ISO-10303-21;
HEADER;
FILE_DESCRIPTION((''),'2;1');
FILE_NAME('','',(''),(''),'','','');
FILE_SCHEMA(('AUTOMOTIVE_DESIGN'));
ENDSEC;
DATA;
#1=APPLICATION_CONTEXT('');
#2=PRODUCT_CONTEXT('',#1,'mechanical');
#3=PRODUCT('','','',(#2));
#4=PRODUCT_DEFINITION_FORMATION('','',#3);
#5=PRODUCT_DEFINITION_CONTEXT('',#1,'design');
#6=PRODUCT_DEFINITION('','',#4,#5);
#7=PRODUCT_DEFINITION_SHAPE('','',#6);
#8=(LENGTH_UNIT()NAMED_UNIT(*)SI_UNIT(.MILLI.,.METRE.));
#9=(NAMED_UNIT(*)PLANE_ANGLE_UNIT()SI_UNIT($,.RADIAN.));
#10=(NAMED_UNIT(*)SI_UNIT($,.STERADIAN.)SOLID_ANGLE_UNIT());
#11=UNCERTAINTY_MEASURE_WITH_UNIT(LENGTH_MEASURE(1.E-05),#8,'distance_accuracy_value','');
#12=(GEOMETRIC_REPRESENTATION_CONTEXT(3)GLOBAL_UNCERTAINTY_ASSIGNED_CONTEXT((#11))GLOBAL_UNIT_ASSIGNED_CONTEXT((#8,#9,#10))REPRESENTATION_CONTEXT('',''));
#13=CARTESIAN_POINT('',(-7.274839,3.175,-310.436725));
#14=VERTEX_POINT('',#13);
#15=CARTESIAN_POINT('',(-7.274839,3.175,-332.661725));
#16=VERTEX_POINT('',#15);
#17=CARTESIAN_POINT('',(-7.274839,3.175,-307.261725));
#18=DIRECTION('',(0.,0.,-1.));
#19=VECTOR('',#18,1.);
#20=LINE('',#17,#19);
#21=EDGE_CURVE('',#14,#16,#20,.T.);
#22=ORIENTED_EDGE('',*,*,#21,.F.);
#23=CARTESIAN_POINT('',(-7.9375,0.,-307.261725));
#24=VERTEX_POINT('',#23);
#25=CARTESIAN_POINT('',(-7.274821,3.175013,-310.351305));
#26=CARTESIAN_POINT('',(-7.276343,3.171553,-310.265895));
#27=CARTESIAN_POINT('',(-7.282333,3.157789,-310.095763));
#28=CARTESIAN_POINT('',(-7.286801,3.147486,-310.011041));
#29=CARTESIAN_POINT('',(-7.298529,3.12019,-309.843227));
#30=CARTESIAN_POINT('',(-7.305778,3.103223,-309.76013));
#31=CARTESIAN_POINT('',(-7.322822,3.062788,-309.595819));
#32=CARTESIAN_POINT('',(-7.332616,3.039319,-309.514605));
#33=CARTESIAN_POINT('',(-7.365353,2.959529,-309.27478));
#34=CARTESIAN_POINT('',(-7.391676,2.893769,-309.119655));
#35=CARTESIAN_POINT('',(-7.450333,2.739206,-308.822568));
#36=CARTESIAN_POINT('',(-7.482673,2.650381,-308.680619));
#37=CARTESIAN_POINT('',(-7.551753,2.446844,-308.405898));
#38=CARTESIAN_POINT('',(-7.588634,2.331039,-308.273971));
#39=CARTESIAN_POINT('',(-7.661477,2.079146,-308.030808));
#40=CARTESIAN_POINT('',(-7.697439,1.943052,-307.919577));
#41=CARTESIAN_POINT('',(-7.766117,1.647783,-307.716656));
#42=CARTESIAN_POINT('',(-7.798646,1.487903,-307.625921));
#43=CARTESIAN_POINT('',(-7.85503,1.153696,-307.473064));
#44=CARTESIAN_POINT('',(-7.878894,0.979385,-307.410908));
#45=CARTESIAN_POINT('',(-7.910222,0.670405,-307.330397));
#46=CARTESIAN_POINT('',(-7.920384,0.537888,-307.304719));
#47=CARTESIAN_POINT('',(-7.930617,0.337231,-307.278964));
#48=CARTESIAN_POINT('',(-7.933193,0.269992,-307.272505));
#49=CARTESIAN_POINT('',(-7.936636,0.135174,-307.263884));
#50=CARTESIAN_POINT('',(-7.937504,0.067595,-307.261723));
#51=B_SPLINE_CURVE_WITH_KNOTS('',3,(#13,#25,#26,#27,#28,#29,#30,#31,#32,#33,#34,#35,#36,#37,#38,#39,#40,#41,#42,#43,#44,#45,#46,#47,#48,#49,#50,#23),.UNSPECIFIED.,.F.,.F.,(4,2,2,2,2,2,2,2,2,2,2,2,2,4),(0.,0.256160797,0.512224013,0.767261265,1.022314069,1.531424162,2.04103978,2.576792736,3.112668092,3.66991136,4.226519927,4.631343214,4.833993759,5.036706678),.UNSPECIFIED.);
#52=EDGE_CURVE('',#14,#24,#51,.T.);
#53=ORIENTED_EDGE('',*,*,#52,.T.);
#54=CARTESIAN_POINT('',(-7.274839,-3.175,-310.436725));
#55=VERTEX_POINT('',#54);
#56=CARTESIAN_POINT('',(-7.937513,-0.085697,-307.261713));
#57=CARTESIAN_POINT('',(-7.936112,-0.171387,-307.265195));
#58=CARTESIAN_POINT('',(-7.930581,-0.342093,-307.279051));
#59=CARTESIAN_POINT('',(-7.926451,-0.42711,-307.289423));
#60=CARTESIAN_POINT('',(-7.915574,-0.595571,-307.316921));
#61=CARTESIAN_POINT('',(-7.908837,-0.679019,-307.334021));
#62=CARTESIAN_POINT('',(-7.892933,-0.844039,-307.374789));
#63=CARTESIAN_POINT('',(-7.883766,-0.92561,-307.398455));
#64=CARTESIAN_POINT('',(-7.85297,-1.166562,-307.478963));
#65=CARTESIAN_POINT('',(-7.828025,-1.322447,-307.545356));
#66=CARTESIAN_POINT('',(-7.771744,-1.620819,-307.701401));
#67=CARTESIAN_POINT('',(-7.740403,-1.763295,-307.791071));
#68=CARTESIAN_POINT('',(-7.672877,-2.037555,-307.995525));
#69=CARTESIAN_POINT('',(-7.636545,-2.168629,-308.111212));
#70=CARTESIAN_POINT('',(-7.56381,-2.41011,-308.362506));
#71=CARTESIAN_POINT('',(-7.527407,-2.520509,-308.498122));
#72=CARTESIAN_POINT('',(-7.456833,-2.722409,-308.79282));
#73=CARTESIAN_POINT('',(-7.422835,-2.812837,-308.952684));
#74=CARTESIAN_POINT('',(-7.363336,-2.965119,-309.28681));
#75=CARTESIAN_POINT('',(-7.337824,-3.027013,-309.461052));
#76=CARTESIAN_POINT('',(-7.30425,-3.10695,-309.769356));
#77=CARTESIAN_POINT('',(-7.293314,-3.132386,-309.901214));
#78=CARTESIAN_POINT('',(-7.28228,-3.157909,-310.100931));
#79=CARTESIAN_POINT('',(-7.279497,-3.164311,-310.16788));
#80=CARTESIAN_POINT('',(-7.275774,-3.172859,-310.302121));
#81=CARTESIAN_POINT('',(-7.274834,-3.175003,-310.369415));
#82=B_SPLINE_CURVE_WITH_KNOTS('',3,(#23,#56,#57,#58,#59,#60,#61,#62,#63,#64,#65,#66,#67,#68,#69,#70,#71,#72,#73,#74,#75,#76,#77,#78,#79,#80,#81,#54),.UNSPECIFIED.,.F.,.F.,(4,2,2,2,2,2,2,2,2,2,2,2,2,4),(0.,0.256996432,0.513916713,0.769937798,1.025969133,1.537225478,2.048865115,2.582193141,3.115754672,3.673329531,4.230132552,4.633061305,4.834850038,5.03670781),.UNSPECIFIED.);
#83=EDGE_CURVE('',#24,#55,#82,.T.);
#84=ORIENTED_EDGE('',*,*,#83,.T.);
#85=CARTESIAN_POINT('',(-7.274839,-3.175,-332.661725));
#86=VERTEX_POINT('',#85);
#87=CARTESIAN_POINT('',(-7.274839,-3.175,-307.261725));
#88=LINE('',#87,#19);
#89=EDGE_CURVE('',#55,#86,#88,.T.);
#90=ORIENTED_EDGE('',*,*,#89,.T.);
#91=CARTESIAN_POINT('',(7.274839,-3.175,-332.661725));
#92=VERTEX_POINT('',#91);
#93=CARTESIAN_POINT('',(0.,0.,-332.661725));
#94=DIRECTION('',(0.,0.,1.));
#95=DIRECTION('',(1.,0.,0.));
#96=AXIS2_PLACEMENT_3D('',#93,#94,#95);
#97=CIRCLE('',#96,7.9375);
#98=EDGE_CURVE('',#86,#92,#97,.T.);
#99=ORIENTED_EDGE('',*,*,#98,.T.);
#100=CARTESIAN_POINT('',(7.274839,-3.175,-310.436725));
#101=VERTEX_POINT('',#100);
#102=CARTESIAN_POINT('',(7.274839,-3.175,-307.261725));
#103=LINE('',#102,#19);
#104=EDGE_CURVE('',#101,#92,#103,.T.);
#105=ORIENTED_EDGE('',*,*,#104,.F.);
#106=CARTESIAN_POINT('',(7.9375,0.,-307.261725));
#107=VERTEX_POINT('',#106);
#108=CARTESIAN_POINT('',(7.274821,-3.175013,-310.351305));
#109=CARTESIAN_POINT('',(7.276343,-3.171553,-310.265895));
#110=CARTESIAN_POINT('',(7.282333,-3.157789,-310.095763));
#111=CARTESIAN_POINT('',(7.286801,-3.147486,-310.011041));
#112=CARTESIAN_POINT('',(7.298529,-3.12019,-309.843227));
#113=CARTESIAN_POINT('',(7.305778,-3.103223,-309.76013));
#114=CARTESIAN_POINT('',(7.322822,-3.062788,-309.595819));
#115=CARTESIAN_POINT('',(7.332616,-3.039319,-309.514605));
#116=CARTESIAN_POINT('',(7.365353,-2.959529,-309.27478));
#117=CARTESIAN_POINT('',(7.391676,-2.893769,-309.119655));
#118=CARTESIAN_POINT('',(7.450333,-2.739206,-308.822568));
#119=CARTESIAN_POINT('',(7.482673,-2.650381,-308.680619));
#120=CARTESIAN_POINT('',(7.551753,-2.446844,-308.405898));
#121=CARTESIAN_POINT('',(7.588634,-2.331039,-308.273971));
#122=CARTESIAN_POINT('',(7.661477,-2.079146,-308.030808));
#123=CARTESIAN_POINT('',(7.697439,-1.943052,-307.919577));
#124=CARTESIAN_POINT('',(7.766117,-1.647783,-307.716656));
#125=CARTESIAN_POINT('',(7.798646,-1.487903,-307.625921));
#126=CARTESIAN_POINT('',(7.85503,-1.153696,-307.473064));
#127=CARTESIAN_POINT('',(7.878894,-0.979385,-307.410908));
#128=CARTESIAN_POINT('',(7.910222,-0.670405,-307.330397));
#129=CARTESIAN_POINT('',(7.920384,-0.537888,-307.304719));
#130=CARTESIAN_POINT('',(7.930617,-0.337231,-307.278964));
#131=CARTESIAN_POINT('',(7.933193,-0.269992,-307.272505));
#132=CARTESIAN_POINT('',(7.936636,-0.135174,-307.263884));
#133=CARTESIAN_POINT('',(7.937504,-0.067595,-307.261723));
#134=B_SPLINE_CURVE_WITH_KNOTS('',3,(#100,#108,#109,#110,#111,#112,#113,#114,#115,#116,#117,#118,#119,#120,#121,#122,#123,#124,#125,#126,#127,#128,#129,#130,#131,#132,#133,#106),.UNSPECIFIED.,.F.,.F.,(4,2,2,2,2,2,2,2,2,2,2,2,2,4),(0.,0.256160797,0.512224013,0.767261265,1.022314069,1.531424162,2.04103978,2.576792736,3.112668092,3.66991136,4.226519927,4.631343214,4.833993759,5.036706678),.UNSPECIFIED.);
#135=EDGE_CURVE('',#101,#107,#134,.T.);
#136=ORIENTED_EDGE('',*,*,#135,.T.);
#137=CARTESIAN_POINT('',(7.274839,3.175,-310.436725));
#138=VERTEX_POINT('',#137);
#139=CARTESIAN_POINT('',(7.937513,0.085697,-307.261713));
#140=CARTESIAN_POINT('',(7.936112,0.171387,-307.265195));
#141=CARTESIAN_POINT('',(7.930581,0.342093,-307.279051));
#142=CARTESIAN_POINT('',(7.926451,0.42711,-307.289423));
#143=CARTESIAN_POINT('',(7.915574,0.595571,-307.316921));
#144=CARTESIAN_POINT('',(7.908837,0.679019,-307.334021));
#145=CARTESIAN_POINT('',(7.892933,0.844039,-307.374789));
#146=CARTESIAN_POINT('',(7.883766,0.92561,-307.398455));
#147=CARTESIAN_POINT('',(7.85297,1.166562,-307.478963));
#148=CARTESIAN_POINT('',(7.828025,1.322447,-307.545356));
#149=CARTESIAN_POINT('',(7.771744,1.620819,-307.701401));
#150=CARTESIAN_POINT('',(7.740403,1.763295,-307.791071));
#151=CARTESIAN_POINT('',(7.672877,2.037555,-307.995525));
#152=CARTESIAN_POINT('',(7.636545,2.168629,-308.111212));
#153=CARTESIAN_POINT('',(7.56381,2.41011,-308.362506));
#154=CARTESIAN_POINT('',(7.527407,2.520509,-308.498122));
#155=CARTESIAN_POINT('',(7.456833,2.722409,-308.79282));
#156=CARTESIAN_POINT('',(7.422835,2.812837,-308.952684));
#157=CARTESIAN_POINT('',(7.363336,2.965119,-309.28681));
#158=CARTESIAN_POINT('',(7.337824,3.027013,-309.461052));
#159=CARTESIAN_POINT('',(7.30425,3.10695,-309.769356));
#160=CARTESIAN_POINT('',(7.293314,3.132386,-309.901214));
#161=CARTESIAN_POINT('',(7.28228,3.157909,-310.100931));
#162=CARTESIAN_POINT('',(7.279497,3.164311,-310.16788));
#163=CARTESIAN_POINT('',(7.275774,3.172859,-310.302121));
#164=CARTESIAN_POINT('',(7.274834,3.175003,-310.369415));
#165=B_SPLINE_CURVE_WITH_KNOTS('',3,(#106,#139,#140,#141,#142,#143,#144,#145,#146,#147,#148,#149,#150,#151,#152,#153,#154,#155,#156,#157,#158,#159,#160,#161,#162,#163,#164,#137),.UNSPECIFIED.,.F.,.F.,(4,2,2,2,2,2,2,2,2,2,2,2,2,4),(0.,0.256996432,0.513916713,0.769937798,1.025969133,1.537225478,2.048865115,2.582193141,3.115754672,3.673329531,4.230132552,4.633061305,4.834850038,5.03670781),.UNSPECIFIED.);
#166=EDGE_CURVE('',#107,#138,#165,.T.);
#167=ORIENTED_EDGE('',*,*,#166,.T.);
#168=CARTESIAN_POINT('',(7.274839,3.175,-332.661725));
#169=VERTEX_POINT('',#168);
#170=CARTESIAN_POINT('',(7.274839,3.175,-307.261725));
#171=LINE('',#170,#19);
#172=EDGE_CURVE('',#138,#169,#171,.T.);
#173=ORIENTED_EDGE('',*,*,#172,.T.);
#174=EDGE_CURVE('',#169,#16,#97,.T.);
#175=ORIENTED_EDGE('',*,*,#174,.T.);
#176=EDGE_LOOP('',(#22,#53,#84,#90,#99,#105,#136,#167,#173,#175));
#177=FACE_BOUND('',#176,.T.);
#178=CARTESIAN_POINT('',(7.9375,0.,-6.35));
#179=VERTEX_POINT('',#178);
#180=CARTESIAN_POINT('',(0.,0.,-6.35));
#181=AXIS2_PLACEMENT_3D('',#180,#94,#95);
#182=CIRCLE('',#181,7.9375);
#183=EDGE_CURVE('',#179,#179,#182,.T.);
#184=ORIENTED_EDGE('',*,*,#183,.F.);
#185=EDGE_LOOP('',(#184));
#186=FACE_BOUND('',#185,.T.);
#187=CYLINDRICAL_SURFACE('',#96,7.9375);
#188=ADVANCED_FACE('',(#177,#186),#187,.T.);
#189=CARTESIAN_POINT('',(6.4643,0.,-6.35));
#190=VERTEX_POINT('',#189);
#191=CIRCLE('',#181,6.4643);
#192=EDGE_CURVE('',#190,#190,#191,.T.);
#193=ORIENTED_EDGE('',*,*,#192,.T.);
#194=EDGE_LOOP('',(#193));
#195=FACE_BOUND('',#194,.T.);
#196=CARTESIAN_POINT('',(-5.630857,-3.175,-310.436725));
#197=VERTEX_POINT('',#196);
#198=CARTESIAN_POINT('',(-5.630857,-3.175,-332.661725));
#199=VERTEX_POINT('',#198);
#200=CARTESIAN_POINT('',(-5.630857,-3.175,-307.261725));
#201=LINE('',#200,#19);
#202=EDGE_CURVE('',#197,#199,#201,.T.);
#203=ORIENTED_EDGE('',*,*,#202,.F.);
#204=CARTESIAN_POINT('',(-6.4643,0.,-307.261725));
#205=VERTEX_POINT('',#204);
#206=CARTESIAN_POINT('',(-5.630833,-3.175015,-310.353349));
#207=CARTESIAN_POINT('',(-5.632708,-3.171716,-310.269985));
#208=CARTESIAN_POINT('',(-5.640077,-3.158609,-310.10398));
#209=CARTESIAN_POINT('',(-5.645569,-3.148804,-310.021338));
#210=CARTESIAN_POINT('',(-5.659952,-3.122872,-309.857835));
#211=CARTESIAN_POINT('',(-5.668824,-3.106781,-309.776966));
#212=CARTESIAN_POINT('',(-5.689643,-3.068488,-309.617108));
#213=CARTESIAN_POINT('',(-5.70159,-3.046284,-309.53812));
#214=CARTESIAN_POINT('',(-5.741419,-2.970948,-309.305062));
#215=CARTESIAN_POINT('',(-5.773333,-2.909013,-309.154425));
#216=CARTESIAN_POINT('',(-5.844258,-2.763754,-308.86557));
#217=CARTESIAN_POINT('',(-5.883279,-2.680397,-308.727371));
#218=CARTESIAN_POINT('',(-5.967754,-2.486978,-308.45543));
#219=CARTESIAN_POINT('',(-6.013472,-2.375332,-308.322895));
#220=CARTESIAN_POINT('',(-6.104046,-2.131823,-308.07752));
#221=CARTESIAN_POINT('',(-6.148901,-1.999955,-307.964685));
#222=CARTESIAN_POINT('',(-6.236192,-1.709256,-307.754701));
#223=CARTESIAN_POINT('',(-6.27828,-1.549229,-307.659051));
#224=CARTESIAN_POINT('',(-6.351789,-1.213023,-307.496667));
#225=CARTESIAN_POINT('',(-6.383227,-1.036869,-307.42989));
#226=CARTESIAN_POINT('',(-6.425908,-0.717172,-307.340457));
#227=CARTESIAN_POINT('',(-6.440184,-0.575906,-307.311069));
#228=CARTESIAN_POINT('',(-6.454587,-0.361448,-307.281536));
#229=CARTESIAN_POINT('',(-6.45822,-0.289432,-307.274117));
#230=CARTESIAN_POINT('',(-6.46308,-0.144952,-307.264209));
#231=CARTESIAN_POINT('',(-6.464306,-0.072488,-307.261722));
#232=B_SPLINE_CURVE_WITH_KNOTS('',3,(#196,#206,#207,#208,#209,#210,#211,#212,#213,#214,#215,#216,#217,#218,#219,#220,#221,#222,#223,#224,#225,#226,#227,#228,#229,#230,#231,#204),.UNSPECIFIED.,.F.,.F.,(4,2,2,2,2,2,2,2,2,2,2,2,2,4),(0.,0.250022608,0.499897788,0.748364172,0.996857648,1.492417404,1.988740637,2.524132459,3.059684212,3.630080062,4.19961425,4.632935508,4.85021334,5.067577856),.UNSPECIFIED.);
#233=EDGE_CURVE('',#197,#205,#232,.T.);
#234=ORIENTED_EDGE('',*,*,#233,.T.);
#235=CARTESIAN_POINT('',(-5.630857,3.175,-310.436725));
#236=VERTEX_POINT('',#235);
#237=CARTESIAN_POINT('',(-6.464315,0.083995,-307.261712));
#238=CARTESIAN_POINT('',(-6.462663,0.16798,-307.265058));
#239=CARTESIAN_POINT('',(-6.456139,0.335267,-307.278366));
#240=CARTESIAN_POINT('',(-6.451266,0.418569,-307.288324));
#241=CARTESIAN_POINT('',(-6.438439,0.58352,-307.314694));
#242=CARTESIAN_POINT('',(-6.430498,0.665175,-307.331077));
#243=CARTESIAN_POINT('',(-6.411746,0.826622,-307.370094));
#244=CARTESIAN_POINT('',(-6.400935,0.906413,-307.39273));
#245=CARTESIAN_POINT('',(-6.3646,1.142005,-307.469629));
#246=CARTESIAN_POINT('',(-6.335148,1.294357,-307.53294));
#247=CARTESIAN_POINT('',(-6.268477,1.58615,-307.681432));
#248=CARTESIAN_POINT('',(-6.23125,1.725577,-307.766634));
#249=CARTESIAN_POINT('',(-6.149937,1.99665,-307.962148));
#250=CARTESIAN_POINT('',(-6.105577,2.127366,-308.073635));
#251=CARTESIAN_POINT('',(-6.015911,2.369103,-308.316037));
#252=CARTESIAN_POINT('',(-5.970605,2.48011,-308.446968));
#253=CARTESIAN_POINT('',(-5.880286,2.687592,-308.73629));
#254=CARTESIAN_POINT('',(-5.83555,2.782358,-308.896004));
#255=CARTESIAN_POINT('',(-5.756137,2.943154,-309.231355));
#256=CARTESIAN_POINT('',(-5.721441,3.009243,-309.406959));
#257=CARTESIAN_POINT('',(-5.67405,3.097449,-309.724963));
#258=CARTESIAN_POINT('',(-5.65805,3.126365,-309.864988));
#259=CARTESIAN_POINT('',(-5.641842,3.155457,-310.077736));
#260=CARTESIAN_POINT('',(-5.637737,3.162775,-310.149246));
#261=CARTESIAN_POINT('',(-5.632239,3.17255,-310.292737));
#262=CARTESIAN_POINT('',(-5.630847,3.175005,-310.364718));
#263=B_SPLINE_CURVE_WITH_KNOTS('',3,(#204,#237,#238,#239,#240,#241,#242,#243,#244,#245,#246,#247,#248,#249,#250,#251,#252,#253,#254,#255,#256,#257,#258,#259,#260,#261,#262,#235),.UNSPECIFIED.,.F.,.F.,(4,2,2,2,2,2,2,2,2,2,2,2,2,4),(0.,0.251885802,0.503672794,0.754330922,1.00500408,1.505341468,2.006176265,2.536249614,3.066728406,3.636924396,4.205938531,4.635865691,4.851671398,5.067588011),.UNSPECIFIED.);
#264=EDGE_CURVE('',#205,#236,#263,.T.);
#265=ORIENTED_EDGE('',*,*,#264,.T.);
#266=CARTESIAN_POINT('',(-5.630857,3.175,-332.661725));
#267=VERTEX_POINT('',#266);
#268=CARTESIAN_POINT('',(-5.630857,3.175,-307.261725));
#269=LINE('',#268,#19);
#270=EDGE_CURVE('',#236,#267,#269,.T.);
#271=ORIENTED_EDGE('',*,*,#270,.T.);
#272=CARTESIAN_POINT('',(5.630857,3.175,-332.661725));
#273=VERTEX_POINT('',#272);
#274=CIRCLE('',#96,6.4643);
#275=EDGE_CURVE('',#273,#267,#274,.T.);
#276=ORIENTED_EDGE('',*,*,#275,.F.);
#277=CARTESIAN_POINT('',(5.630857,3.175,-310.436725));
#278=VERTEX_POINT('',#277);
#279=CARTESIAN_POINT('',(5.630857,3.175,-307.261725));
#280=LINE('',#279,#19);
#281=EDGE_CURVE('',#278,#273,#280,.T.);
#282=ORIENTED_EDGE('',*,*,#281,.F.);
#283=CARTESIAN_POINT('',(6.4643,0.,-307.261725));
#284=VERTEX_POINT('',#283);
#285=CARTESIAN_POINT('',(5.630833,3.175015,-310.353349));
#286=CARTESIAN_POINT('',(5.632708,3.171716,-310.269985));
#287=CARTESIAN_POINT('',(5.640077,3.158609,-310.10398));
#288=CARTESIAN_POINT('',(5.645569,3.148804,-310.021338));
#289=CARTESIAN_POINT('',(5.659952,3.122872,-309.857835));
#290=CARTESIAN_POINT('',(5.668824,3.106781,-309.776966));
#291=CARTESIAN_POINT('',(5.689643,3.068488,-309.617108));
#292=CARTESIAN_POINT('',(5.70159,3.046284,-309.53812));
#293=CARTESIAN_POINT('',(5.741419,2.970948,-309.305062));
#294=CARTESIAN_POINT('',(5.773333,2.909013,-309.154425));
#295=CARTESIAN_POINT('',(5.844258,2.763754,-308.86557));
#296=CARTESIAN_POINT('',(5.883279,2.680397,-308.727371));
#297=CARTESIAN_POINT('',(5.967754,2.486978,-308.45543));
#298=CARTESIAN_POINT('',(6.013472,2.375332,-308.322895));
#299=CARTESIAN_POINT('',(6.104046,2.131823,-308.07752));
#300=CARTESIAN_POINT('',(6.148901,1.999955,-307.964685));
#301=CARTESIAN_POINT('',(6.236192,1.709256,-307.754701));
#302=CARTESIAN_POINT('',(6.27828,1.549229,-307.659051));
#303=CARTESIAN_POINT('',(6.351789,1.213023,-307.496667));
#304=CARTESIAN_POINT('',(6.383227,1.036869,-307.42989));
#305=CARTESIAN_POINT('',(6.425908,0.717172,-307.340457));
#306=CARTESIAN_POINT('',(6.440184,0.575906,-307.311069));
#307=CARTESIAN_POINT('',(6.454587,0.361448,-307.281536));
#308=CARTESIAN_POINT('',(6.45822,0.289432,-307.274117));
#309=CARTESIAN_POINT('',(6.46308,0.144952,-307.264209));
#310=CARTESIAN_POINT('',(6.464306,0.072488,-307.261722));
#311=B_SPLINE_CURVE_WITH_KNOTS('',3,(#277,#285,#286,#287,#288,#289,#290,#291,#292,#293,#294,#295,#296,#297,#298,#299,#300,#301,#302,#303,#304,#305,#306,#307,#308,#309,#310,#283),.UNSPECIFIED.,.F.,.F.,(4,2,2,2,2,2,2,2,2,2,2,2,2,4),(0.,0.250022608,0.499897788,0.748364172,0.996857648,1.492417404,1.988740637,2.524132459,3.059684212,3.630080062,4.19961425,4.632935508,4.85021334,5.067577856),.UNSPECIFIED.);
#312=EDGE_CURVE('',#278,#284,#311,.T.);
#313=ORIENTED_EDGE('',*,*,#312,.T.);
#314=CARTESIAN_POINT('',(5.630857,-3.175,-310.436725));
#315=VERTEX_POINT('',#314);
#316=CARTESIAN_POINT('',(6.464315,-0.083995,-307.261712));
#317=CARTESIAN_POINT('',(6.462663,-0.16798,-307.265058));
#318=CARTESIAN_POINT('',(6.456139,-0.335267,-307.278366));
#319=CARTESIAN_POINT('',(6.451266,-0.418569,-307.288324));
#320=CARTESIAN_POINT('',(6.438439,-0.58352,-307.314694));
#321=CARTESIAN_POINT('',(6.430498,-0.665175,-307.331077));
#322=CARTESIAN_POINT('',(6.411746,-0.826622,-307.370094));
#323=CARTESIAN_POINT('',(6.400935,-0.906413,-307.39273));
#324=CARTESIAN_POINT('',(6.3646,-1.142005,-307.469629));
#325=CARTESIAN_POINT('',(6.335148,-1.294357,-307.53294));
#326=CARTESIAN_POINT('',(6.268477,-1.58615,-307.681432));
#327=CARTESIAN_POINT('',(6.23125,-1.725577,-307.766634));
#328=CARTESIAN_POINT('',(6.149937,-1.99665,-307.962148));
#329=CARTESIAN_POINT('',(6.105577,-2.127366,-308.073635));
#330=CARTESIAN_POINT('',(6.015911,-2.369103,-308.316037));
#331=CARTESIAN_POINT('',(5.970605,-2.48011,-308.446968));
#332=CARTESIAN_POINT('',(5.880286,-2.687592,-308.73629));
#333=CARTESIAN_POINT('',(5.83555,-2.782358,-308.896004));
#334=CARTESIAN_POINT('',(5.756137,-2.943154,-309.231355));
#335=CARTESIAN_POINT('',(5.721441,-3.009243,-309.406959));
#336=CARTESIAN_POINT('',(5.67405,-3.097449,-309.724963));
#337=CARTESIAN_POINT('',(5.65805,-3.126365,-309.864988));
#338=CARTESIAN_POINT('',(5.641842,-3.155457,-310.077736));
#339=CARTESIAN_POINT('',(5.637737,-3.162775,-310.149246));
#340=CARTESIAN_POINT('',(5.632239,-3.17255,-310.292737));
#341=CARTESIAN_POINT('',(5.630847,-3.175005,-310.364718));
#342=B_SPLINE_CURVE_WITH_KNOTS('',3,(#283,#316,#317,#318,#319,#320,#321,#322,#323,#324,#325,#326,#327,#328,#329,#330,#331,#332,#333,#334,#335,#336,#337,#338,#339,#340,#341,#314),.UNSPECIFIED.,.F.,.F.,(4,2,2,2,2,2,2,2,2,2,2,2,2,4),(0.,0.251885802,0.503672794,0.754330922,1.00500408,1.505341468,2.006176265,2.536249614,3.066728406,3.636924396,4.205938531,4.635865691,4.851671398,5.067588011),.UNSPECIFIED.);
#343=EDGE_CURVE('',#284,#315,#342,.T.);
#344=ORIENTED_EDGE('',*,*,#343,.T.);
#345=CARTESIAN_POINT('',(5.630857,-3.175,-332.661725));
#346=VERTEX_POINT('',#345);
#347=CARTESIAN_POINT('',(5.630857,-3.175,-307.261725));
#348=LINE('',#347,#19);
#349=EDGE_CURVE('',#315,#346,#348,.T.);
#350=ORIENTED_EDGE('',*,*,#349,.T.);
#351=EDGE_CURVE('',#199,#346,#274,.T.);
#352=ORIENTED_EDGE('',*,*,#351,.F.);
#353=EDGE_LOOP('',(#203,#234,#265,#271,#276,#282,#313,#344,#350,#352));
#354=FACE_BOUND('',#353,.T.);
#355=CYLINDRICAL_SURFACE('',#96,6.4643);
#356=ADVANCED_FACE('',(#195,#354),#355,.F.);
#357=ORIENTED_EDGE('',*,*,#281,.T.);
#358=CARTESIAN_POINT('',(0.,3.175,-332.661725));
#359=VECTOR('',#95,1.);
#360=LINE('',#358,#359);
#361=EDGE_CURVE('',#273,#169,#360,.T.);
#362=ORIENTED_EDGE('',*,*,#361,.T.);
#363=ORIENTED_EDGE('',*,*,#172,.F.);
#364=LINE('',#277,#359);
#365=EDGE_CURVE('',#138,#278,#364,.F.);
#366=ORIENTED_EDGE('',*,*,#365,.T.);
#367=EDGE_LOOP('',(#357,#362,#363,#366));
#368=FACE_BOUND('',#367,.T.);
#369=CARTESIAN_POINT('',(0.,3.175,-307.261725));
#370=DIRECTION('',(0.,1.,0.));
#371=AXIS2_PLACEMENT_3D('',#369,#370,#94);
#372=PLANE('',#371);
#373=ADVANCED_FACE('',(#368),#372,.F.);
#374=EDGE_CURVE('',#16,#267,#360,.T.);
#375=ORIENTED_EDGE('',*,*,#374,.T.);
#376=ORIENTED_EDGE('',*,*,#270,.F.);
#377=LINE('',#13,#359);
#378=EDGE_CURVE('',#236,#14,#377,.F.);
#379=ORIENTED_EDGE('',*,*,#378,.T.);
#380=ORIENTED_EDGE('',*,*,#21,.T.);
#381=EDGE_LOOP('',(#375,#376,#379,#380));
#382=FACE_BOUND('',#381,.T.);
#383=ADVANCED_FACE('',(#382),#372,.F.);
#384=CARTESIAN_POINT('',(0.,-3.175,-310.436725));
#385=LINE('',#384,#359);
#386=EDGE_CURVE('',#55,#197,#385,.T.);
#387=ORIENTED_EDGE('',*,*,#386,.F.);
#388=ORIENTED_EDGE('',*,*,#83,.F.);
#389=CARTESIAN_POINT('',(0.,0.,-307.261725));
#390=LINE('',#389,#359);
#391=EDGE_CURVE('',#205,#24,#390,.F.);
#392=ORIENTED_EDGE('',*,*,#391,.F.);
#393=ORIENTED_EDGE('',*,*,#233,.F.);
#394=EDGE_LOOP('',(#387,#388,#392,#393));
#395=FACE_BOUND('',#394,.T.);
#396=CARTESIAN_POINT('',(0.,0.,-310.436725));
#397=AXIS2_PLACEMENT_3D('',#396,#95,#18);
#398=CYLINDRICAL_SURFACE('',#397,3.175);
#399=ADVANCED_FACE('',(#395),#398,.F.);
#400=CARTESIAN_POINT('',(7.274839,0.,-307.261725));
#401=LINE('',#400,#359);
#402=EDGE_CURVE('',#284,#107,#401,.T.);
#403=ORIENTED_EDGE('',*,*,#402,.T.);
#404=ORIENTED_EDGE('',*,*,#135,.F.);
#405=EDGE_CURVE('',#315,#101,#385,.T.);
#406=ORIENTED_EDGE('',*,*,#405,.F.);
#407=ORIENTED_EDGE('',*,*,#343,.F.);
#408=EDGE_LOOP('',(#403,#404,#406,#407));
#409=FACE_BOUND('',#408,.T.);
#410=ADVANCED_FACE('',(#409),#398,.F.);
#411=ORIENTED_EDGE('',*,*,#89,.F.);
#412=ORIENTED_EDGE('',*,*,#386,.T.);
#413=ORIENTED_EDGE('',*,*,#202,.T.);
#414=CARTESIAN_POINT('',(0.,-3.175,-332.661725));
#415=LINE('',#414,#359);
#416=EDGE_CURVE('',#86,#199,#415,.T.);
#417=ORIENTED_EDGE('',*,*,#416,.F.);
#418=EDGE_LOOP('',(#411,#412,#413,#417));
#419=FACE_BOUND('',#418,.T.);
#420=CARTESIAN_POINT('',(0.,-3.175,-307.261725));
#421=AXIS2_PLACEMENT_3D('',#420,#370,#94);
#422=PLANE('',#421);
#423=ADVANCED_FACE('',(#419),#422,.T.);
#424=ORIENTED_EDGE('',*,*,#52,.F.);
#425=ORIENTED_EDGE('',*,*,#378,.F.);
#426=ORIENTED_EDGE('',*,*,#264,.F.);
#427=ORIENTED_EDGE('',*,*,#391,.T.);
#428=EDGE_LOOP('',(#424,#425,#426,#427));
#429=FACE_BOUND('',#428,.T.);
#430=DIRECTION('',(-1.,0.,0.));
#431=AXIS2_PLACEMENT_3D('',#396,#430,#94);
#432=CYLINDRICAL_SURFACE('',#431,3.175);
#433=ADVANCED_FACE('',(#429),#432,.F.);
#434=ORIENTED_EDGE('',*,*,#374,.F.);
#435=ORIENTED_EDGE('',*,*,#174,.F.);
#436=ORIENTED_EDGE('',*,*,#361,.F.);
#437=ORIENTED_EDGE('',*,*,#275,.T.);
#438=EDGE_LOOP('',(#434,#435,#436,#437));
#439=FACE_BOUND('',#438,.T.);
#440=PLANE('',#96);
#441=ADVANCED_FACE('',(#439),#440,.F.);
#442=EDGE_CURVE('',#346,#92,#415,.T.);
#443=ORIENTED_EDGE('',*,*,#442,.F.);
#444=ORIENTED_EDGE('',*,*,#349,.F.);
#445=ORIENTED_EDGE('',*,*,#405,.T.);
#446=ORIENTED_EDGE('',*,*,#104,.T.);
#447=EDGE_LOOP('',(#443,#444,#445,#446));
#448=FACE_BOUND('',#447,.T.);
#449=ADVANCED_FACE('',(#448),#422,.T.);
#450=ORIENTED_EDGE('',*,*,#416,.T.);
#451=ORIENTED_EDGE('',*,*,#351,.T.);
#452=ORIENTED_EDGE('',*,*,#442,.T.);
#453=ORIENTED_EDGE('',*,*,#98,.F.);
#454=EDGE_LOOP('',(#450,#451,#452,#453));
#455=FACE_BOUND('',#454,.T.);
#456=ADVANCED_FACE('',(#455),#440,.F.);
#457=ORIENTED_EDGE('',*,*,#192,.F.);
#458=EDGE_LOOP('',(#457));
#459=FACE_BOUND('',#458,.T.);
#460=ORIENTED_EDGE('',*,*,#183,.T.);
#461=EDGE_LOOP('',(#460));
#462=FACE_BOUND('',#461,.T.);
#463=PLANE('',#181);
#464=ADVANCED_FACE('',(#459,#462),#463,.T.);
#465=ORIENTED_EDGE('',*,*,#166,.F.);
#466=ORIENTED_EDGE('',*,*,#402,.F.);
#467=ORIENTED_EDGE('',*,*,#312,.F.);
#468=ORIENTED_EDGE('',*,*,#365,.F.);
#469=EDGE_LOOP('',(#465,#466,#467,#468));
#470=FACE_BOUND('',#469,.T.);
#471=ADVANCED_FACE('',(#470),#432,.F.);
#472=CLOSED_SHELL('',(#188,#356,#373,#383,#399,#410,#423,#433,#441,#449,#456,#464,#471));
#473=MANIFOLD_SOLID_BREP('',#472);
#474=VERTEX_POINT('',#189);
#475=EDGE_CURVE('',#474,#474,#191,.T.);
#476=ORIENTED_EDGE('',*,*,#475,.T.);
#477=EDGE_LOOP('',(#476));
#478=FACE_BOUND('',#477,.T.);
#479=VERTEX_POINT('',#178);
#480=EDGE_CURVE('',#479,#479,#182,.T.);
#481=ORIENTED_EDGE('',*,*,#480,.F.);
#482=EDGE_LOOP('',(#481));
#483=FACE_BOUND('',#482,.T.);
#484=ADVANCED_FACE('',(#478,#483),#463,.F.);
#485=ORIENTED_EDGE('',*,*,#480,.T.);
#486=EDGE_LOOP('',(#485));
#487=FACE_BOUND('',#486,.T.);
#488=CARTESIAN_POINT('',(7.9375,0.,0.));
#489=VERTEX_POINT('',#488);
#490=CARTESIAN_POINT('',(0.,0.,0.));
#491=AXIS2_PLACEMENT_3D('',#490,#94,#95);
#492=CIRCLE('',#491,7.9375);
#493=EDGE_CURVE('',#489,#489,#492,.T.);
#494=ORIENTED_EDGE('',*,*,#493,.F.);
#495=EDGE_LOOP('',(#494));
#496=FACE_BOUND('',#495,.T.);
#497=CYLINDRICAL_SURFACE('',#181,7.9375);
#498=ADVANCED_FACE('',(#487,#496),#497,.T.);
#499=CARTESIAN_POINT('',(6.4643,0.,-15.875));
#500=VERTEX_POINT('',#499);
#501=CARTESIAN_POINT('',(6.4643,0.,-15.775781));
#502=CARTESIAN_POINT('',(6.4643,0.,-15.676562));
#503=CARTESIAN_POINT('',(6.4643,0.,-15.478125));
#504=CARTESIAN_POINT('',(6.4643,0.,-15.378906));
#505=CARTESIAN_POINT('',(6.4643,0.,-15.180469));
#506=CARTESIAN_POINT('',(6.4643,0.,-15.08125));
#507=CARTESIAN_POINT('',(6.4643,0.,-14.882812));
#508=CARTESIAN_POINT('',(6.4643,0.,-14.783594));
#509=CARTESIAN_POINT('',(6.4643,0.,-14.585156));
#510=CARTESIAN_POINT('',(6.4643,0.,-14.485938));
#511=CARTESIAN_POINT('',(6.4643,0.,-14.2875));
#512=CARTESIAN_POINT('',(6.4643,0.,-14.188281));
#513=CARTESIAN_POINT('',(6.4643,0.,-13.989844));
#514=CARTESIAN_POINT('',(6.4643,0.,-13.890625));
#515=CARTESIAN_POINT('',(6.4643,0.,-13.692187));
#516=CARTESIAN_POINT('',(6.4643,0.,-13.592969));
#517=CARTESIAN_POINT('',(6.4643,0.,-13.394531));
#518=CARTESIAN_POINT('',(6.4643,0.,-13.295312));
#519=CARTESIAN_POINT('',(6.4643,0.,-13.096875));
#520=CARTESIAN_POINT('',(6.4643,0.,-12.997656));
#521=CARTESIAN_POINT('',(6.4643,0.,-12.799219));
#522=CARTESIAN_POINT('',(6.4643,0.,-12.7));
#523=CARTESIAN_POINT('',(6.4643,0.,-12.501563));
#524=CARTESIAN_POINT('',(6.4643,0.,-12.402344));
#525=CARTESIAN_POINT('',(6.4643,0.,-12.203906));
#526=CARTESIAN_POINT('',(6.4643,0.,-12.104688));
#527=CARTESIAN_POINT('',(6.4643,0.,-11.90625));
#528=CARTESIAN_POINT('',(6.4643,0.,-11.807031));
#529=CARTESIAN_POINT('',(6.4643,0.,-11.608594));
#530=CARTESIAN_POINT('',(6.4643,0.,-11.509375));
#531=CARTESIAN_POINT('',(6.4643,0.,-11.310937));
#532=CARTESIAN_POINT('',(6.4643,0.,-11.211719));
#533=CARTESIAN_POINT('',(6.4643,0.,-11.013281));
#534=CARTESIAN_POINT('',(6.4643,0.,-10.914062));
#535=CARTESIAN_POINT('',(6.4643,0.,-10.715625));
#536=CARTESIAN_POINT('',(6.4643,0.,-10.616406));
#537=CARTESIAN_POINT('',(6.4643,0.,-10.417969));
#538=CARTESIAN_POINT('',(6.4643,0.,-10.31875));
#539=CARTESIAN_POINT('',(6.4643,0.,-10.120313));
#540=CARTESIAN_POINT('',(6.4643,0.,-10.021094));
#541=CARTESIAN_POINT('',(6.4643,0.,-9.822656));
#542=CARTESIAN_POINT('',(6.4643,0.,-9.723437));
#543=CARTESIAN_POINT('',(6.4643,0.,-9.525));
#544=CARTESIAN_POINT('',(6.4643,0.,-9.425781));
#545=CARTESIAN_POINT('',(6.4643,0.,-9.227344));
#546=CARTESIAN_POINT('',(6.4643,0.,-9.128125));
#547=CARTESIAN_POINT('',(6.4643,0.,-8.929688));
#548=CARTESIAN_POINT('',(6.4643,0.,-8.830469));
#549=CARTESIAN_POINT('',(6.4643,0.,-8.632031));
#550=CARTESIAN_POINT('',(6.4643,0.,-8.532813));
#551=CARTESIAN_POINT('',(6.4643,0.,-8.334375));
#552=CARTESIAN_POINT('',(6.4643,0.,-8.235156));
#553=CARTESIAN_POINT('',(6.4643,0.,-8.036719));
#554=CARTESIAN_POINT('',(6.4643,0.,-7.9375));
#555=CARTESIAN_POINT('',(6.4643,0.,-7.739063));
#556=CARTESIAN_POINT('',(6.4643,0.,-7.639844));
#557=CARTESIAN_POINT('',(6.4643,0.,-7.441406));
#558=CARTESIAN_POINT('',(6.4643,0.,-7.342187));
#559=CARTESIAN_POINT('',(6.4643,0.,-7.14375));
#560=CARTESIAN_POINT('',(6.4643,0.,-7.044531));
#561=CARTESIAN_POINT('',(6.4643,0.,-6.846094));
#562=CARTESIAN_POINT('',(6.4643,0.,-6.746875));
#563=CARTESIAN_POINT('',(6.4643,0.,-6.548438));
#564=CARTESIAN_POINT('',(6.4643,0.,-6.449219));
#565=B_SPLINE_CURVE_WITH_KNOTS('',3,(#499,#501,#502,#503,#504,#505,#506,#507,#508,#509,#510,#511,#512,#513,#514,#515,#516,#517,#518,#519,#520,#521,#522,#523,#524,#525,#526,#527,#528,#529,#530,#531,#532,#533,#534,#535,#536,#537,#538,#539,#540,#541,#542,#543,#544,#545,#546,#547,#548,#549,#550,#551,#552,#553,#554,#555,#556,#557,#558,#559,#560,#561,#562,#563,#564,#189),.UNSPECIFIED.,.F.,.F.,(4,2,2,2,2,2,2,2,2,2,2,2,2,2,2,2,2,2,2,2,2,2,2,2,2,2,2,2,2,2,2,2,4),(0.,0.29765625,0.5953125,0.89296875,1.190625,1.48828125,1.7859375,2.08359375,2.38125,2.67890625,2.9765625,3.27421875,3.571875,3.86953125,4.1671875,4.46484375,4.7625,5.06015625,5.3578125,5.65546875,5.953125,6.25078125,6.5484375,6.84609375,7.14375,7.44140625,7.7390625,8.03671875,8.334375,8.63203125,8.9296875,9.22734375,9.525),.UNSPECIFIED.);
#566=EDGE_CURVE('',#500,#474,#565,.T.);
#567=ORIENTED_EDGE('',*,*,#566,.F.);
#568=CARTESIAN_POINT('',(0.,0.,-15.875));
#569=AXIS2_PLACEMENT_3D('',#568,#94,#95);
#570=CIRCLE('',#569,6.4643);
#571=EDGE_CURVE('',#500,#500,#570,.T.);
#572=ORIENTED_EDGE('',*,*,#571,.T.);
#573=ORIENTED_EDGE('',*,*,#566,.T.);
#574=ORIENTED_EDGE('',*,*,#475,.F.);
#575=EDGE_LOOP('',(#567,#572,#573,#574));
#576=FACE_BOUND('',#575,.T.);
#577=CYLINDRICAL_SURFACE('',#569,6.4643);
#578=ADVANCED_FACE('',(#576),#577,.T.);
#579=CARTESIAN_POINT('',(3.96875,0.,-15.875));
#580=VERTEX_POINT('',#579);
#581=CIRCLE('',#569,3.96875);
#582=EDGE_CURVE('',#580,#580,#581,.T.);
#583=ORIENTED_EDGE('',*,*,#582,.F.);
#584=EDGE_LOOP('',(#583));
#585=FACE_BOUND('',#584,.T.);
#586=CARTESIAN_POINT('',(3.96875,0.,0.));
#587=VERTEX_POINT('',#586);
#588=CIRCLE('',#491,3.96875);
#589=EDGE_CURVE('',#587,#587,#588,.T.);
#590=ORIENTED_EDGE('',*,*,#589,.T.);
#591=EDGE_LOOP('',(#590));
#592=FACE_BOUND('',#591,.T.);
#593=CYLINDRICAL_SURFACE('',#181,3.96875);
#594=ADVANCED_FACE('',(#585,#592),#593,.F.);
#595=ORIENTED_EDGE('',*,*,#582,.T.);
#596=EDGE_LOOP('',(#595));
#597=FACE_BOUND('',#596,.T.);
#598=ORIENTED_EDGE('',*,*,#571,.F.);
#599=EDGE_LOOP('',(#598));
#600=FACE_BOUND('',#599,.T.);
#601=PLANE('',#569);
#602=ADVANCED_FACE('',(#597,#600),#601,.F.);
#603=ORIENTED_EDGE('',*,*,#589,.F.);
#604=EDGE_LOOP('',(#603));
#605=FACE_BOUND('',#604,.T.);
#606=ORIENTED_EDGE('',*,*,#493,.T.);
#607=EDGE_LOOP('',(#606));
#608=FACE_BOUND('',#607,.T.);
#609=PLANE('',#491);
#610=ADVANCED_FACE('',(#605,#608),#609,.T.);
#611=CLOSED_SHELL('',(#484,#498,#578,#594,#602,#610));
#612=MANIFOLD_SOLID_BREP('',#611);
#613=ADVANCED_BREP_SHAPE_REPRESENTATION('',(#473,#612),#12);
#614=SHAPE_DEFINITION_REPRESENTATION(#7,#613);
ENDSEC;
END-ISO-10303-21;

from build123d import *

# Parameters (mm, degrees)
THREADED_INSERT_1_1_DEPTH = 6.35
THREADED_START            = -6.35
THREADED_INSERT_1_2_DEPTH = 9.525
A_ARM_START               = -6.35
A_ARM_TUBE_DEPTH          = 326.311725
APEX_START                = -307.261725
APEX_SLOT_DEPTH           = 25.4
FILLET1_R                 = 3.175


with BuildPart() as part:
    # Sketch1 → Threaded insert 1-1 (new body)
    with BuildSketch(Plane.XY):
        with BuildLine():
            ThreePointArc((-2.38125, 3.175), (0, 3.96875), (2.38125, 3.175))
            Line((2.38125, 3.175), (5.630856905, 3.175))
            ThreePointArc((5.630856905, 3.175), (0, 6.4643), (-5.630856905, 3.175))
            Line((-5.630856905, 3.175), (-2.38125, 3.175))
        make_face()
        with BuildLine():
            ThreePointArc((-5.630856905, 3.175), (0, 6.4643), (5.630856905, 3.175))
            Line((5.630856905, 3.175), (7.274838916, 3.175))
            ThreePointArc((7.274838916, 3.175), (0, 7.9375), (-7.274838916, 3.175))
            Line((-7.274838916, 3.175), (-5.630856905, 3.175))
        make_face()
        with BuildLine():
            ThreePointArc((2.38125, 3.175), (3.549757914, 1.774878957), (3.96875, 0))
            Line((3.96875, 0), (6.4643, 0))
            ThreePointArc((6.4643, 0), (6.252468424, 1.641283978), (5.630856905, 3.175))
            Line((5.630856905, 3.175), (2.38125, 3.175))
        make_face()
        with BuildLine():
            Line((-6.4643, 0), (-3.96875, 0))
            ThreePointArc((-3.96875, 0), (-3.549757914, 1.774878957), (-2.38125, 3.175))
            Line((-2.38125, 3.175), (-5.630856905, 3.175))
            ThreePointArc((-5.630856905, 3.175), (-6.252468424, 1.641283978), (-6.4643, 0))
        make_face()
        with BuildLine():
            ThreePointArc((5.630856905, 3.175), (6.252468424, 1.641283978), (6.4643, 0))
            Line((6.4643, 0), (7.9375, 0))
            ThreePointArc((7.9375, 0), (7.770068859, 1.621707797), (7.274838916, 3.175))
            Line((7.274838916, 3.175), (5.630856905, 3.175))
        make_face()
        with BuildLine():
            Line((-7.9375, 0), (-6.4643, 0))
            ThreePointArc((-6.4643, 0), (-6.252468424, 1.641283978), (-5.630856905, 3.175))
            Line((-5.630856905, 3.175), (-7.274838916, 3.175))
            ThreePointArc((-7.274838916, 3.175), (-7.770068859, 1.621707797), (-7.9375, 0))
        make_face()
        with BuildLine():
            Line((7.9375, 0), (6.4643, 0))
            ThreePointArc((6.4643, 0), (6.252468424, -1.641283978), (5.630856905, -3.175))
            Line((5.630856905, -3.175), (7.274838916, -3.175))
            ThreePointArc((7.274838916, -3.175), (7.770068859, -1.621707797), (7.9375, 0))
        make_face()
        with BuildLine():
            ThreePointArc((-5.630856905, -3.175), (-6.252468424, -1.641283978), (-6.4643, 0))
            Line((-6.4643, 0), (-7.9375, 0))
            ThreePointArc((-7.9375, 0), (-7.770068859, -1.621707797), (-7.274838916, -3.175))
            Line((-7.274838916, -3.175), (-5.630856905, -3.175))
        make_face()
        with BuildLine():
            Line((6.4643, 0), (3.96875, 0))
            ThreePointArc((3.96875, 0), (3.549757914, -1.774878957), (2.38125, -3.175))
            Line((2.38125, -3.175), (5.630856905, -3.175))
            ThreePointArc((5.630856905, -3.175), (6.252468424, -1.641283978), (6.4643, 0))
        make_face()
        with BuildLine():
            ThreePointArc((-2.38125, -3.175), (-3.549757914, -1.774878957), (-3.96875, 0))
            Line((-3.96875, 0), (-6.4643, 0))
            ThreePointArc((-6.4643, 0), (-6.252468424, -1.641283978), (-5.630856905, -3.175))
            Line((-5.630856905, -3.175), (-2.38125, -3.175))
        make_face()
        with BuildLine():
            Line((5.630856905, -3.175), (2.38125, -3.175))
            ThreePointArc((2.38125, -3.175), (0, -3.96875), (-2.38125, -3.175))
            Line((-2.38125, -3.175), (-5.630856905, -3.175))
            ThreePointArc((-5.630856905, -3.175), (0, -6.4643), (5.630856905, -3.175))
        make_face()
        with BuildLine():
            Line((7.274838916, -3.175), (5.630856905, -3.175))
            ThreePointArc((5.630856905, -3.175), (0, -6.4643), (-5.630856905, -3.175))
            Line((-5.630856905, -3.175), (-7.274838916, -3.175))
            ThreePointArc((-7.274838916, -3.175), (0, -7.9375), (7.274838916, -3.175))
        make_face()
    extrude(amount=-THREADED_INSERT_1_1_DEPTH)

    # Sketch1<3> → Threaded insert 1-2 (add)
    with BuildSketch(Plane.XY.offset(THREADED_START)):
        with BuildLine():
            ThreePointArc((-2.38125, 3.175), (0, 3.96875), (2.38125, 3.175))
            Line((2.38125, 3.175), (5.630856905, 3.175))
            ThreePointArc((5.630856905, 3.175), (0, 6.4643), (-5.630856905, 3.175))
            Line((-5.630856905, 3.175), (-2.38125, 3.175))
        make_face()
        with BuildLine():
            ThreePointArc((2.38125, 3.175), (3.549757914, 1.774878957), (3.96875, 0))
            Line((3.96875, 0), (6.4643, 0))
            ThreePointArc((6.4643, 0), (6.252468424, 1.641283978), (5.630856905, 3.175))
            Line((5.630856905, 3.175), (2.38125, 3.175))
        make_face()
        with BuildLine():
            Line((-6.4643, 0), (-3.96875, 0))
            ThreePointArc((-3.96875, 0), (-3.549757914, 1.774878957), (-2.38125, 3.175))
            Line((-2.38125, 3.175), (-5.630856905, 3.175))
            ThreePointArc((-5.630856905, 3.175), (-6.252468424, 1.641283978), (-6.4643, 0))
        make_face()
        with BuildLine():
            Line((6.4643, 0), (3.96875, 0))
            ThreePointArc((3.96875, 0), (3.549757914, -1.774878957), (2.38125, -3.175))
            Line((2.38125, -3.175), (5.630856905, -3.175))
            ThreePointArc((5.630856905, -3.175), (6.252468424, -1.641283978), (6.4643, 0))
        make_face()
        with BuildLine():
            ThreePointArc((-2.38125, -3.175), (-3.549757914, -1.774878957), (-3.96875, 0))
            Line((-3.96875, 0), (-6.4643, 0))
            ThreePointArc((-6.4643, 0), (-6.252468424, -1.641283978), (-5.630856905, -3.175))
            Line((-5.630856905, -3.175), (-2.38125, -3.175))
        make_face()
        with BuildLine():
            Line((5.630856905, -3.175), (2.38125, -3.175))
            ThreePointArc((2.38125, -3.175), (0, -3.96875), (-2.38125, -3.175))
            Line((-2.38125, -3.175), (-5.630856905, -3.175))
            ThreePointArc((-5.630856905, -3.175), (0, -6.4643), (5.630856905, -3.175))
        make_face()
    extrude(amount=-THREADED_INSERT_1_2_DEPTH)


with BuildPart() as body_2:
    # Sketch1<4> → A-arm tube (new body)
    with BuildSketch(Plane.XY.offset(A_ARM_START)):
        with BuildLine():
            ThreePointArc((-5.630856905, 3.175), (0, 6.4643), (5.630856905, 3.175))
            Line((5.630856905, 3.175), (7.274838916, 3.175))
            ThreePointArc((7.274838916, 3.175), (0, 7.9375), (-7.274838916, 3.175))
            Line((-7.274838916, 3.175), (-5.630856905, 3.175))
        make_face()
        with BuildLine():
            ThreePointArc((5.630856905, 3.175), (6.252468424, 1.641283978), (6.4643, 0))
            Line((6.4643, 0), (7.9375, 0))
            ThreePointArc((7.9375, 0), (7.770068859, 1.621707797), (7.274838916, 3.175))
            Line((7.274838916, 3.175), (5.630856905, 3.175))
        make_face()
        with BuildLine():
            Line((-7.9375, 0), (-6.4643, 0))
            ThreePointArc((-6.4643, 0), (-6.252468424, 1.641283978), (-5.630856905, 3.175))
            Line((-5.630856905, 3.175), (-7.274838916, 3.175))
            ThreePointArc((-7.274838916, 3.175), (-7.770068859, 1.621707797), (-7.9375, 0))
        make_face()
        with BuildLine():
            Line((7.9375, 0), (6.4643, 0))
            ThreePointArc((6.4643, 0), (6.252468424, -1.641283978), (5.630856905, -3.175))
            Line((5.630856905, -3.175), (7.274838916, -3.175))
            ThreePointArc((7.274838916, -3.175), (7.770068859, -1.621707797), (7.9375, 0))
        make_face()
        with BuildLine():
            ThreePointArc((-5.630856905, -3.175), (-6.252468424, -1.641283978), (-6.4643, 0))
            Line((-6.4643, 0), (-7.9375, 0))
            ThreePointArc((-7.9375, 0), (-7.770068859, -1.621707797), (-7.274838916, -3.175))
            Line((-7.274838916, -3.175), (-5.630856905, -3.175))
        make_face()
        with BuildLine():
            Line((7.274838916, -3.175), (5.630856905, -3.175))
            ThreePointArc((5.630856905, -3.175), (0, -6.4643), (-5.630856905, -3.175))
            Line((-5.630856905, -3.175), (-7.274838916, -3.175))
            ThreePointArc((-7.274838916, -3.175), (0, -7.9375), (7.274838916, -3.175))
        make_face()
    extrude(amount=-A_ARM_TUBE_DEPTH)

    # Sketch1<5> → Apex slot (cut)
    with BuildSketch(Plane.XY.offset(APEX_START)):
        with BuildLine():
            ThreePointArc((5.630856905, 3.175), (6.252468424, 1.641283978), (6.4643, 0))
            Line((6.4643, 0), (7.9375, 0))
            ThreePointArc((7.9375, 0), (7.770068859, 1.621707797), (7.274838916, 3.175))
            Line((7.274838916, 3.175), (5.630856905, 3.175))
        make_face()
        with BuildLine():
            Line((-7.9375, 0), (-6.4643, 0))
            ThreePointArc((-6.4643, 0), (-6.252468424, 1.641283978), (-5.630856905, 3.175))
            Line((-5.630856905, 3.175), (-7.274838916, 3.175))
            ThreePointArc((-7.274838916, 3.175), (-7.770068859, 1.621707797), (-7.9375, 0))
        make_face()
        with BuildLine():
            Line((7.9375, 0), (6.4643, 0))
            ThreePointArc((6.4643, 0), (6.252468424, -1.641283978), (5.630856905, -3.175))
            Line((5.630856905, -3.175), (7.274838916, -3.175))
            ThreePointArc((7.274838916, -3.175), (7.770068859, -1.621707797), (7.9375, 0))
        make_face()
        with BuildLine():
            ThreePointArc((-5.630856905, -3.175), (-6.252468424, -1.641283978), (-6.4643, 0))
            Line((-6.4643, 0), (-7.9375, 0))
            ThreePointArc((-7.9375, 0), (-7.770068859, -1.621707797), (-7.274838916, -3.175))
            Line((-7.274838916, -3.175), (-5.630856905, -3.175))
        make_face()
    extrude(amount=-APEX_SLOT_DEPTH, mode=Mode.SUBTRACT)

    # Fillet1
    # the kernel refuses this fillet: 3.175 mm, written as the material it adds along each edge
    with BuildSketch(Plane(origin=(2.306643095, 3.175, -307.261725), x_dir=(0, 0, -1), z_dir=(-1, 0, 0))) as fillet1_piece_1_section:
        with BuildLine():
            CenterArc((FILLET1_R, FILLET1_R), FILLET1_R, 180, 90)
            Line((0, FILLET1_R), (0, 0))
            Line((0, 0), (FILLET1_R, 0))
        make_face()
    fillet1_piece_1 = extrude(amount=17.51898201, mode=Mode.PRIVATE)
    fillet1_piece_1 = fillet1_piece_1 - Plane(origin=(0, 0, -307.98145762), x_dir=(-0.8710698614669244, 0.49115913555994567, 0), z_dir=(0, 0, 1)) * Cylinder(6.4643, 48, mode=Mode.PRIVATE)
    fillet1_piece_1 = fillet1_piece_1 & Plane(origin=(0, 0, -307.98145762), x_dir=(-1, 0, 0), z_dir=(0, 0, 1)) * Cylinder(7.9375, 48, mode=Mode.PRIVATE)
    add(fillet1_piece_1)
    with BuildSketch(Plane(origin=(-15.212338916, -3.175, -307.261725), x_dir=(0, 0, -1), z_dir=(1, 0, 0))) as fillet1_piece_2_section:
        with BuildLine():
            CenterArc((FILLET1_R, FILLET1_R), FILLET1_R, 180, 90)
            Line((0, FILLET1_R), (0, 0))
            Line((0, 0), (FILLET1_R, 0))
        make_face()
    fillet1_piece_2 = extrude(amount=17.51898201, mode=Mode.PRIVATE)
    fillet1_piece_2 = fillet1_piece_2 - Plane(origin=(0, 0, -307.981457783), x_dir=(-0.8710698614669244, 0.49115913555994567, 0), z_dir=(0, 0, 1)) * Cylinder(6.4643, 48, mode=Mode.PRIVATE)
    fillet1_piece_2 = fillet1_piece_2 & Plane(origin=(0, 0, -307.981457783), x_dir=(-1, 0, 0), z_dir=(0, 0, 1)) * Cylinder(7.9375, 48, mode=Mode.PRIVATE)
    add(fillet1_piece_2)
    with BuildSketch(Plane(origin=(-2.306643095, -3.175, -307.261725), x_dir=(0, 0, -1), z_dir=(1, 0, 0))) as fillet1_piece_3_section:
        with BuildLine():
            CenterArc((FILLET1_R, FILLET1_R), FILLET1_R, 180, 90)
            Line((0, FILLET1_R), (0, 0))
            Line((0, 0), (FILLET1_R, 0))
        make_face()
    fillet1_piece_3 = extrude(amount=17.51898201, mode=Mode.PRIVATE)
    fillet1_piece_3 = fillet1_piece_3 - Plane(origin=(0, 0, -307.98145762), x_dir=(-0.8710698614669244, 0.49115913555994567, 0), z_dir=(0, 0, 1)) * Cylinder(6.4643, 48, mode=Mode.PRIVATE)
    fillet1_piece_3 = fillet1_piece_3 & Plane(origin=(0, 0, -307.98145762), x_dir=(-1, 0, 0), z_dir=(0, 0, 1)) * Cylinder(7.9375, 48, mode=Mode.PRIVATE)
    add(fillet1_piece_3)
    with BuildSketch(Plane(origin=(15.212338916, 3.175, -307.261725), x_dir=(0, -1, 0), z_dir=(-1, 0, 0))) as fillet1_piece_4_section:
        with BuildLine():
            CenterArc((FILLET1_R, -FILLET1_R), FILLET1_R, 90, 90)
            Line((0, -FILLET1_R), (0, 0))
            Line((0, 0), (FILLET1_R, 0))
        make_face()
    fillet1_piece_4 = extrude(amount=17.51898201, mode=Mode.PRIVATE)
    fillet1_piece_4 = fillet1_piece_4 - Plane(origin=(0, 0, -307.981457609), x_dir=(-0.8710698614669244, 0.49115913555994567, 0), z_dir=(0, 0, 1)) * Cylinder(6.4643, 48, mode=Mode.PRIVATE)
    fillet1_piece_4 = fillet1_piece_4 & Plane(origin=(0, 0, -307.981457609), x_dir=(-1, 0, 0), z_dir=(0, 0, 1)) * Cylinder(7.9375, 48, mode=Mode.PRIVATE)
    add(fillet1_piece_4)


solid = Compound([part.part, body_2.part])
